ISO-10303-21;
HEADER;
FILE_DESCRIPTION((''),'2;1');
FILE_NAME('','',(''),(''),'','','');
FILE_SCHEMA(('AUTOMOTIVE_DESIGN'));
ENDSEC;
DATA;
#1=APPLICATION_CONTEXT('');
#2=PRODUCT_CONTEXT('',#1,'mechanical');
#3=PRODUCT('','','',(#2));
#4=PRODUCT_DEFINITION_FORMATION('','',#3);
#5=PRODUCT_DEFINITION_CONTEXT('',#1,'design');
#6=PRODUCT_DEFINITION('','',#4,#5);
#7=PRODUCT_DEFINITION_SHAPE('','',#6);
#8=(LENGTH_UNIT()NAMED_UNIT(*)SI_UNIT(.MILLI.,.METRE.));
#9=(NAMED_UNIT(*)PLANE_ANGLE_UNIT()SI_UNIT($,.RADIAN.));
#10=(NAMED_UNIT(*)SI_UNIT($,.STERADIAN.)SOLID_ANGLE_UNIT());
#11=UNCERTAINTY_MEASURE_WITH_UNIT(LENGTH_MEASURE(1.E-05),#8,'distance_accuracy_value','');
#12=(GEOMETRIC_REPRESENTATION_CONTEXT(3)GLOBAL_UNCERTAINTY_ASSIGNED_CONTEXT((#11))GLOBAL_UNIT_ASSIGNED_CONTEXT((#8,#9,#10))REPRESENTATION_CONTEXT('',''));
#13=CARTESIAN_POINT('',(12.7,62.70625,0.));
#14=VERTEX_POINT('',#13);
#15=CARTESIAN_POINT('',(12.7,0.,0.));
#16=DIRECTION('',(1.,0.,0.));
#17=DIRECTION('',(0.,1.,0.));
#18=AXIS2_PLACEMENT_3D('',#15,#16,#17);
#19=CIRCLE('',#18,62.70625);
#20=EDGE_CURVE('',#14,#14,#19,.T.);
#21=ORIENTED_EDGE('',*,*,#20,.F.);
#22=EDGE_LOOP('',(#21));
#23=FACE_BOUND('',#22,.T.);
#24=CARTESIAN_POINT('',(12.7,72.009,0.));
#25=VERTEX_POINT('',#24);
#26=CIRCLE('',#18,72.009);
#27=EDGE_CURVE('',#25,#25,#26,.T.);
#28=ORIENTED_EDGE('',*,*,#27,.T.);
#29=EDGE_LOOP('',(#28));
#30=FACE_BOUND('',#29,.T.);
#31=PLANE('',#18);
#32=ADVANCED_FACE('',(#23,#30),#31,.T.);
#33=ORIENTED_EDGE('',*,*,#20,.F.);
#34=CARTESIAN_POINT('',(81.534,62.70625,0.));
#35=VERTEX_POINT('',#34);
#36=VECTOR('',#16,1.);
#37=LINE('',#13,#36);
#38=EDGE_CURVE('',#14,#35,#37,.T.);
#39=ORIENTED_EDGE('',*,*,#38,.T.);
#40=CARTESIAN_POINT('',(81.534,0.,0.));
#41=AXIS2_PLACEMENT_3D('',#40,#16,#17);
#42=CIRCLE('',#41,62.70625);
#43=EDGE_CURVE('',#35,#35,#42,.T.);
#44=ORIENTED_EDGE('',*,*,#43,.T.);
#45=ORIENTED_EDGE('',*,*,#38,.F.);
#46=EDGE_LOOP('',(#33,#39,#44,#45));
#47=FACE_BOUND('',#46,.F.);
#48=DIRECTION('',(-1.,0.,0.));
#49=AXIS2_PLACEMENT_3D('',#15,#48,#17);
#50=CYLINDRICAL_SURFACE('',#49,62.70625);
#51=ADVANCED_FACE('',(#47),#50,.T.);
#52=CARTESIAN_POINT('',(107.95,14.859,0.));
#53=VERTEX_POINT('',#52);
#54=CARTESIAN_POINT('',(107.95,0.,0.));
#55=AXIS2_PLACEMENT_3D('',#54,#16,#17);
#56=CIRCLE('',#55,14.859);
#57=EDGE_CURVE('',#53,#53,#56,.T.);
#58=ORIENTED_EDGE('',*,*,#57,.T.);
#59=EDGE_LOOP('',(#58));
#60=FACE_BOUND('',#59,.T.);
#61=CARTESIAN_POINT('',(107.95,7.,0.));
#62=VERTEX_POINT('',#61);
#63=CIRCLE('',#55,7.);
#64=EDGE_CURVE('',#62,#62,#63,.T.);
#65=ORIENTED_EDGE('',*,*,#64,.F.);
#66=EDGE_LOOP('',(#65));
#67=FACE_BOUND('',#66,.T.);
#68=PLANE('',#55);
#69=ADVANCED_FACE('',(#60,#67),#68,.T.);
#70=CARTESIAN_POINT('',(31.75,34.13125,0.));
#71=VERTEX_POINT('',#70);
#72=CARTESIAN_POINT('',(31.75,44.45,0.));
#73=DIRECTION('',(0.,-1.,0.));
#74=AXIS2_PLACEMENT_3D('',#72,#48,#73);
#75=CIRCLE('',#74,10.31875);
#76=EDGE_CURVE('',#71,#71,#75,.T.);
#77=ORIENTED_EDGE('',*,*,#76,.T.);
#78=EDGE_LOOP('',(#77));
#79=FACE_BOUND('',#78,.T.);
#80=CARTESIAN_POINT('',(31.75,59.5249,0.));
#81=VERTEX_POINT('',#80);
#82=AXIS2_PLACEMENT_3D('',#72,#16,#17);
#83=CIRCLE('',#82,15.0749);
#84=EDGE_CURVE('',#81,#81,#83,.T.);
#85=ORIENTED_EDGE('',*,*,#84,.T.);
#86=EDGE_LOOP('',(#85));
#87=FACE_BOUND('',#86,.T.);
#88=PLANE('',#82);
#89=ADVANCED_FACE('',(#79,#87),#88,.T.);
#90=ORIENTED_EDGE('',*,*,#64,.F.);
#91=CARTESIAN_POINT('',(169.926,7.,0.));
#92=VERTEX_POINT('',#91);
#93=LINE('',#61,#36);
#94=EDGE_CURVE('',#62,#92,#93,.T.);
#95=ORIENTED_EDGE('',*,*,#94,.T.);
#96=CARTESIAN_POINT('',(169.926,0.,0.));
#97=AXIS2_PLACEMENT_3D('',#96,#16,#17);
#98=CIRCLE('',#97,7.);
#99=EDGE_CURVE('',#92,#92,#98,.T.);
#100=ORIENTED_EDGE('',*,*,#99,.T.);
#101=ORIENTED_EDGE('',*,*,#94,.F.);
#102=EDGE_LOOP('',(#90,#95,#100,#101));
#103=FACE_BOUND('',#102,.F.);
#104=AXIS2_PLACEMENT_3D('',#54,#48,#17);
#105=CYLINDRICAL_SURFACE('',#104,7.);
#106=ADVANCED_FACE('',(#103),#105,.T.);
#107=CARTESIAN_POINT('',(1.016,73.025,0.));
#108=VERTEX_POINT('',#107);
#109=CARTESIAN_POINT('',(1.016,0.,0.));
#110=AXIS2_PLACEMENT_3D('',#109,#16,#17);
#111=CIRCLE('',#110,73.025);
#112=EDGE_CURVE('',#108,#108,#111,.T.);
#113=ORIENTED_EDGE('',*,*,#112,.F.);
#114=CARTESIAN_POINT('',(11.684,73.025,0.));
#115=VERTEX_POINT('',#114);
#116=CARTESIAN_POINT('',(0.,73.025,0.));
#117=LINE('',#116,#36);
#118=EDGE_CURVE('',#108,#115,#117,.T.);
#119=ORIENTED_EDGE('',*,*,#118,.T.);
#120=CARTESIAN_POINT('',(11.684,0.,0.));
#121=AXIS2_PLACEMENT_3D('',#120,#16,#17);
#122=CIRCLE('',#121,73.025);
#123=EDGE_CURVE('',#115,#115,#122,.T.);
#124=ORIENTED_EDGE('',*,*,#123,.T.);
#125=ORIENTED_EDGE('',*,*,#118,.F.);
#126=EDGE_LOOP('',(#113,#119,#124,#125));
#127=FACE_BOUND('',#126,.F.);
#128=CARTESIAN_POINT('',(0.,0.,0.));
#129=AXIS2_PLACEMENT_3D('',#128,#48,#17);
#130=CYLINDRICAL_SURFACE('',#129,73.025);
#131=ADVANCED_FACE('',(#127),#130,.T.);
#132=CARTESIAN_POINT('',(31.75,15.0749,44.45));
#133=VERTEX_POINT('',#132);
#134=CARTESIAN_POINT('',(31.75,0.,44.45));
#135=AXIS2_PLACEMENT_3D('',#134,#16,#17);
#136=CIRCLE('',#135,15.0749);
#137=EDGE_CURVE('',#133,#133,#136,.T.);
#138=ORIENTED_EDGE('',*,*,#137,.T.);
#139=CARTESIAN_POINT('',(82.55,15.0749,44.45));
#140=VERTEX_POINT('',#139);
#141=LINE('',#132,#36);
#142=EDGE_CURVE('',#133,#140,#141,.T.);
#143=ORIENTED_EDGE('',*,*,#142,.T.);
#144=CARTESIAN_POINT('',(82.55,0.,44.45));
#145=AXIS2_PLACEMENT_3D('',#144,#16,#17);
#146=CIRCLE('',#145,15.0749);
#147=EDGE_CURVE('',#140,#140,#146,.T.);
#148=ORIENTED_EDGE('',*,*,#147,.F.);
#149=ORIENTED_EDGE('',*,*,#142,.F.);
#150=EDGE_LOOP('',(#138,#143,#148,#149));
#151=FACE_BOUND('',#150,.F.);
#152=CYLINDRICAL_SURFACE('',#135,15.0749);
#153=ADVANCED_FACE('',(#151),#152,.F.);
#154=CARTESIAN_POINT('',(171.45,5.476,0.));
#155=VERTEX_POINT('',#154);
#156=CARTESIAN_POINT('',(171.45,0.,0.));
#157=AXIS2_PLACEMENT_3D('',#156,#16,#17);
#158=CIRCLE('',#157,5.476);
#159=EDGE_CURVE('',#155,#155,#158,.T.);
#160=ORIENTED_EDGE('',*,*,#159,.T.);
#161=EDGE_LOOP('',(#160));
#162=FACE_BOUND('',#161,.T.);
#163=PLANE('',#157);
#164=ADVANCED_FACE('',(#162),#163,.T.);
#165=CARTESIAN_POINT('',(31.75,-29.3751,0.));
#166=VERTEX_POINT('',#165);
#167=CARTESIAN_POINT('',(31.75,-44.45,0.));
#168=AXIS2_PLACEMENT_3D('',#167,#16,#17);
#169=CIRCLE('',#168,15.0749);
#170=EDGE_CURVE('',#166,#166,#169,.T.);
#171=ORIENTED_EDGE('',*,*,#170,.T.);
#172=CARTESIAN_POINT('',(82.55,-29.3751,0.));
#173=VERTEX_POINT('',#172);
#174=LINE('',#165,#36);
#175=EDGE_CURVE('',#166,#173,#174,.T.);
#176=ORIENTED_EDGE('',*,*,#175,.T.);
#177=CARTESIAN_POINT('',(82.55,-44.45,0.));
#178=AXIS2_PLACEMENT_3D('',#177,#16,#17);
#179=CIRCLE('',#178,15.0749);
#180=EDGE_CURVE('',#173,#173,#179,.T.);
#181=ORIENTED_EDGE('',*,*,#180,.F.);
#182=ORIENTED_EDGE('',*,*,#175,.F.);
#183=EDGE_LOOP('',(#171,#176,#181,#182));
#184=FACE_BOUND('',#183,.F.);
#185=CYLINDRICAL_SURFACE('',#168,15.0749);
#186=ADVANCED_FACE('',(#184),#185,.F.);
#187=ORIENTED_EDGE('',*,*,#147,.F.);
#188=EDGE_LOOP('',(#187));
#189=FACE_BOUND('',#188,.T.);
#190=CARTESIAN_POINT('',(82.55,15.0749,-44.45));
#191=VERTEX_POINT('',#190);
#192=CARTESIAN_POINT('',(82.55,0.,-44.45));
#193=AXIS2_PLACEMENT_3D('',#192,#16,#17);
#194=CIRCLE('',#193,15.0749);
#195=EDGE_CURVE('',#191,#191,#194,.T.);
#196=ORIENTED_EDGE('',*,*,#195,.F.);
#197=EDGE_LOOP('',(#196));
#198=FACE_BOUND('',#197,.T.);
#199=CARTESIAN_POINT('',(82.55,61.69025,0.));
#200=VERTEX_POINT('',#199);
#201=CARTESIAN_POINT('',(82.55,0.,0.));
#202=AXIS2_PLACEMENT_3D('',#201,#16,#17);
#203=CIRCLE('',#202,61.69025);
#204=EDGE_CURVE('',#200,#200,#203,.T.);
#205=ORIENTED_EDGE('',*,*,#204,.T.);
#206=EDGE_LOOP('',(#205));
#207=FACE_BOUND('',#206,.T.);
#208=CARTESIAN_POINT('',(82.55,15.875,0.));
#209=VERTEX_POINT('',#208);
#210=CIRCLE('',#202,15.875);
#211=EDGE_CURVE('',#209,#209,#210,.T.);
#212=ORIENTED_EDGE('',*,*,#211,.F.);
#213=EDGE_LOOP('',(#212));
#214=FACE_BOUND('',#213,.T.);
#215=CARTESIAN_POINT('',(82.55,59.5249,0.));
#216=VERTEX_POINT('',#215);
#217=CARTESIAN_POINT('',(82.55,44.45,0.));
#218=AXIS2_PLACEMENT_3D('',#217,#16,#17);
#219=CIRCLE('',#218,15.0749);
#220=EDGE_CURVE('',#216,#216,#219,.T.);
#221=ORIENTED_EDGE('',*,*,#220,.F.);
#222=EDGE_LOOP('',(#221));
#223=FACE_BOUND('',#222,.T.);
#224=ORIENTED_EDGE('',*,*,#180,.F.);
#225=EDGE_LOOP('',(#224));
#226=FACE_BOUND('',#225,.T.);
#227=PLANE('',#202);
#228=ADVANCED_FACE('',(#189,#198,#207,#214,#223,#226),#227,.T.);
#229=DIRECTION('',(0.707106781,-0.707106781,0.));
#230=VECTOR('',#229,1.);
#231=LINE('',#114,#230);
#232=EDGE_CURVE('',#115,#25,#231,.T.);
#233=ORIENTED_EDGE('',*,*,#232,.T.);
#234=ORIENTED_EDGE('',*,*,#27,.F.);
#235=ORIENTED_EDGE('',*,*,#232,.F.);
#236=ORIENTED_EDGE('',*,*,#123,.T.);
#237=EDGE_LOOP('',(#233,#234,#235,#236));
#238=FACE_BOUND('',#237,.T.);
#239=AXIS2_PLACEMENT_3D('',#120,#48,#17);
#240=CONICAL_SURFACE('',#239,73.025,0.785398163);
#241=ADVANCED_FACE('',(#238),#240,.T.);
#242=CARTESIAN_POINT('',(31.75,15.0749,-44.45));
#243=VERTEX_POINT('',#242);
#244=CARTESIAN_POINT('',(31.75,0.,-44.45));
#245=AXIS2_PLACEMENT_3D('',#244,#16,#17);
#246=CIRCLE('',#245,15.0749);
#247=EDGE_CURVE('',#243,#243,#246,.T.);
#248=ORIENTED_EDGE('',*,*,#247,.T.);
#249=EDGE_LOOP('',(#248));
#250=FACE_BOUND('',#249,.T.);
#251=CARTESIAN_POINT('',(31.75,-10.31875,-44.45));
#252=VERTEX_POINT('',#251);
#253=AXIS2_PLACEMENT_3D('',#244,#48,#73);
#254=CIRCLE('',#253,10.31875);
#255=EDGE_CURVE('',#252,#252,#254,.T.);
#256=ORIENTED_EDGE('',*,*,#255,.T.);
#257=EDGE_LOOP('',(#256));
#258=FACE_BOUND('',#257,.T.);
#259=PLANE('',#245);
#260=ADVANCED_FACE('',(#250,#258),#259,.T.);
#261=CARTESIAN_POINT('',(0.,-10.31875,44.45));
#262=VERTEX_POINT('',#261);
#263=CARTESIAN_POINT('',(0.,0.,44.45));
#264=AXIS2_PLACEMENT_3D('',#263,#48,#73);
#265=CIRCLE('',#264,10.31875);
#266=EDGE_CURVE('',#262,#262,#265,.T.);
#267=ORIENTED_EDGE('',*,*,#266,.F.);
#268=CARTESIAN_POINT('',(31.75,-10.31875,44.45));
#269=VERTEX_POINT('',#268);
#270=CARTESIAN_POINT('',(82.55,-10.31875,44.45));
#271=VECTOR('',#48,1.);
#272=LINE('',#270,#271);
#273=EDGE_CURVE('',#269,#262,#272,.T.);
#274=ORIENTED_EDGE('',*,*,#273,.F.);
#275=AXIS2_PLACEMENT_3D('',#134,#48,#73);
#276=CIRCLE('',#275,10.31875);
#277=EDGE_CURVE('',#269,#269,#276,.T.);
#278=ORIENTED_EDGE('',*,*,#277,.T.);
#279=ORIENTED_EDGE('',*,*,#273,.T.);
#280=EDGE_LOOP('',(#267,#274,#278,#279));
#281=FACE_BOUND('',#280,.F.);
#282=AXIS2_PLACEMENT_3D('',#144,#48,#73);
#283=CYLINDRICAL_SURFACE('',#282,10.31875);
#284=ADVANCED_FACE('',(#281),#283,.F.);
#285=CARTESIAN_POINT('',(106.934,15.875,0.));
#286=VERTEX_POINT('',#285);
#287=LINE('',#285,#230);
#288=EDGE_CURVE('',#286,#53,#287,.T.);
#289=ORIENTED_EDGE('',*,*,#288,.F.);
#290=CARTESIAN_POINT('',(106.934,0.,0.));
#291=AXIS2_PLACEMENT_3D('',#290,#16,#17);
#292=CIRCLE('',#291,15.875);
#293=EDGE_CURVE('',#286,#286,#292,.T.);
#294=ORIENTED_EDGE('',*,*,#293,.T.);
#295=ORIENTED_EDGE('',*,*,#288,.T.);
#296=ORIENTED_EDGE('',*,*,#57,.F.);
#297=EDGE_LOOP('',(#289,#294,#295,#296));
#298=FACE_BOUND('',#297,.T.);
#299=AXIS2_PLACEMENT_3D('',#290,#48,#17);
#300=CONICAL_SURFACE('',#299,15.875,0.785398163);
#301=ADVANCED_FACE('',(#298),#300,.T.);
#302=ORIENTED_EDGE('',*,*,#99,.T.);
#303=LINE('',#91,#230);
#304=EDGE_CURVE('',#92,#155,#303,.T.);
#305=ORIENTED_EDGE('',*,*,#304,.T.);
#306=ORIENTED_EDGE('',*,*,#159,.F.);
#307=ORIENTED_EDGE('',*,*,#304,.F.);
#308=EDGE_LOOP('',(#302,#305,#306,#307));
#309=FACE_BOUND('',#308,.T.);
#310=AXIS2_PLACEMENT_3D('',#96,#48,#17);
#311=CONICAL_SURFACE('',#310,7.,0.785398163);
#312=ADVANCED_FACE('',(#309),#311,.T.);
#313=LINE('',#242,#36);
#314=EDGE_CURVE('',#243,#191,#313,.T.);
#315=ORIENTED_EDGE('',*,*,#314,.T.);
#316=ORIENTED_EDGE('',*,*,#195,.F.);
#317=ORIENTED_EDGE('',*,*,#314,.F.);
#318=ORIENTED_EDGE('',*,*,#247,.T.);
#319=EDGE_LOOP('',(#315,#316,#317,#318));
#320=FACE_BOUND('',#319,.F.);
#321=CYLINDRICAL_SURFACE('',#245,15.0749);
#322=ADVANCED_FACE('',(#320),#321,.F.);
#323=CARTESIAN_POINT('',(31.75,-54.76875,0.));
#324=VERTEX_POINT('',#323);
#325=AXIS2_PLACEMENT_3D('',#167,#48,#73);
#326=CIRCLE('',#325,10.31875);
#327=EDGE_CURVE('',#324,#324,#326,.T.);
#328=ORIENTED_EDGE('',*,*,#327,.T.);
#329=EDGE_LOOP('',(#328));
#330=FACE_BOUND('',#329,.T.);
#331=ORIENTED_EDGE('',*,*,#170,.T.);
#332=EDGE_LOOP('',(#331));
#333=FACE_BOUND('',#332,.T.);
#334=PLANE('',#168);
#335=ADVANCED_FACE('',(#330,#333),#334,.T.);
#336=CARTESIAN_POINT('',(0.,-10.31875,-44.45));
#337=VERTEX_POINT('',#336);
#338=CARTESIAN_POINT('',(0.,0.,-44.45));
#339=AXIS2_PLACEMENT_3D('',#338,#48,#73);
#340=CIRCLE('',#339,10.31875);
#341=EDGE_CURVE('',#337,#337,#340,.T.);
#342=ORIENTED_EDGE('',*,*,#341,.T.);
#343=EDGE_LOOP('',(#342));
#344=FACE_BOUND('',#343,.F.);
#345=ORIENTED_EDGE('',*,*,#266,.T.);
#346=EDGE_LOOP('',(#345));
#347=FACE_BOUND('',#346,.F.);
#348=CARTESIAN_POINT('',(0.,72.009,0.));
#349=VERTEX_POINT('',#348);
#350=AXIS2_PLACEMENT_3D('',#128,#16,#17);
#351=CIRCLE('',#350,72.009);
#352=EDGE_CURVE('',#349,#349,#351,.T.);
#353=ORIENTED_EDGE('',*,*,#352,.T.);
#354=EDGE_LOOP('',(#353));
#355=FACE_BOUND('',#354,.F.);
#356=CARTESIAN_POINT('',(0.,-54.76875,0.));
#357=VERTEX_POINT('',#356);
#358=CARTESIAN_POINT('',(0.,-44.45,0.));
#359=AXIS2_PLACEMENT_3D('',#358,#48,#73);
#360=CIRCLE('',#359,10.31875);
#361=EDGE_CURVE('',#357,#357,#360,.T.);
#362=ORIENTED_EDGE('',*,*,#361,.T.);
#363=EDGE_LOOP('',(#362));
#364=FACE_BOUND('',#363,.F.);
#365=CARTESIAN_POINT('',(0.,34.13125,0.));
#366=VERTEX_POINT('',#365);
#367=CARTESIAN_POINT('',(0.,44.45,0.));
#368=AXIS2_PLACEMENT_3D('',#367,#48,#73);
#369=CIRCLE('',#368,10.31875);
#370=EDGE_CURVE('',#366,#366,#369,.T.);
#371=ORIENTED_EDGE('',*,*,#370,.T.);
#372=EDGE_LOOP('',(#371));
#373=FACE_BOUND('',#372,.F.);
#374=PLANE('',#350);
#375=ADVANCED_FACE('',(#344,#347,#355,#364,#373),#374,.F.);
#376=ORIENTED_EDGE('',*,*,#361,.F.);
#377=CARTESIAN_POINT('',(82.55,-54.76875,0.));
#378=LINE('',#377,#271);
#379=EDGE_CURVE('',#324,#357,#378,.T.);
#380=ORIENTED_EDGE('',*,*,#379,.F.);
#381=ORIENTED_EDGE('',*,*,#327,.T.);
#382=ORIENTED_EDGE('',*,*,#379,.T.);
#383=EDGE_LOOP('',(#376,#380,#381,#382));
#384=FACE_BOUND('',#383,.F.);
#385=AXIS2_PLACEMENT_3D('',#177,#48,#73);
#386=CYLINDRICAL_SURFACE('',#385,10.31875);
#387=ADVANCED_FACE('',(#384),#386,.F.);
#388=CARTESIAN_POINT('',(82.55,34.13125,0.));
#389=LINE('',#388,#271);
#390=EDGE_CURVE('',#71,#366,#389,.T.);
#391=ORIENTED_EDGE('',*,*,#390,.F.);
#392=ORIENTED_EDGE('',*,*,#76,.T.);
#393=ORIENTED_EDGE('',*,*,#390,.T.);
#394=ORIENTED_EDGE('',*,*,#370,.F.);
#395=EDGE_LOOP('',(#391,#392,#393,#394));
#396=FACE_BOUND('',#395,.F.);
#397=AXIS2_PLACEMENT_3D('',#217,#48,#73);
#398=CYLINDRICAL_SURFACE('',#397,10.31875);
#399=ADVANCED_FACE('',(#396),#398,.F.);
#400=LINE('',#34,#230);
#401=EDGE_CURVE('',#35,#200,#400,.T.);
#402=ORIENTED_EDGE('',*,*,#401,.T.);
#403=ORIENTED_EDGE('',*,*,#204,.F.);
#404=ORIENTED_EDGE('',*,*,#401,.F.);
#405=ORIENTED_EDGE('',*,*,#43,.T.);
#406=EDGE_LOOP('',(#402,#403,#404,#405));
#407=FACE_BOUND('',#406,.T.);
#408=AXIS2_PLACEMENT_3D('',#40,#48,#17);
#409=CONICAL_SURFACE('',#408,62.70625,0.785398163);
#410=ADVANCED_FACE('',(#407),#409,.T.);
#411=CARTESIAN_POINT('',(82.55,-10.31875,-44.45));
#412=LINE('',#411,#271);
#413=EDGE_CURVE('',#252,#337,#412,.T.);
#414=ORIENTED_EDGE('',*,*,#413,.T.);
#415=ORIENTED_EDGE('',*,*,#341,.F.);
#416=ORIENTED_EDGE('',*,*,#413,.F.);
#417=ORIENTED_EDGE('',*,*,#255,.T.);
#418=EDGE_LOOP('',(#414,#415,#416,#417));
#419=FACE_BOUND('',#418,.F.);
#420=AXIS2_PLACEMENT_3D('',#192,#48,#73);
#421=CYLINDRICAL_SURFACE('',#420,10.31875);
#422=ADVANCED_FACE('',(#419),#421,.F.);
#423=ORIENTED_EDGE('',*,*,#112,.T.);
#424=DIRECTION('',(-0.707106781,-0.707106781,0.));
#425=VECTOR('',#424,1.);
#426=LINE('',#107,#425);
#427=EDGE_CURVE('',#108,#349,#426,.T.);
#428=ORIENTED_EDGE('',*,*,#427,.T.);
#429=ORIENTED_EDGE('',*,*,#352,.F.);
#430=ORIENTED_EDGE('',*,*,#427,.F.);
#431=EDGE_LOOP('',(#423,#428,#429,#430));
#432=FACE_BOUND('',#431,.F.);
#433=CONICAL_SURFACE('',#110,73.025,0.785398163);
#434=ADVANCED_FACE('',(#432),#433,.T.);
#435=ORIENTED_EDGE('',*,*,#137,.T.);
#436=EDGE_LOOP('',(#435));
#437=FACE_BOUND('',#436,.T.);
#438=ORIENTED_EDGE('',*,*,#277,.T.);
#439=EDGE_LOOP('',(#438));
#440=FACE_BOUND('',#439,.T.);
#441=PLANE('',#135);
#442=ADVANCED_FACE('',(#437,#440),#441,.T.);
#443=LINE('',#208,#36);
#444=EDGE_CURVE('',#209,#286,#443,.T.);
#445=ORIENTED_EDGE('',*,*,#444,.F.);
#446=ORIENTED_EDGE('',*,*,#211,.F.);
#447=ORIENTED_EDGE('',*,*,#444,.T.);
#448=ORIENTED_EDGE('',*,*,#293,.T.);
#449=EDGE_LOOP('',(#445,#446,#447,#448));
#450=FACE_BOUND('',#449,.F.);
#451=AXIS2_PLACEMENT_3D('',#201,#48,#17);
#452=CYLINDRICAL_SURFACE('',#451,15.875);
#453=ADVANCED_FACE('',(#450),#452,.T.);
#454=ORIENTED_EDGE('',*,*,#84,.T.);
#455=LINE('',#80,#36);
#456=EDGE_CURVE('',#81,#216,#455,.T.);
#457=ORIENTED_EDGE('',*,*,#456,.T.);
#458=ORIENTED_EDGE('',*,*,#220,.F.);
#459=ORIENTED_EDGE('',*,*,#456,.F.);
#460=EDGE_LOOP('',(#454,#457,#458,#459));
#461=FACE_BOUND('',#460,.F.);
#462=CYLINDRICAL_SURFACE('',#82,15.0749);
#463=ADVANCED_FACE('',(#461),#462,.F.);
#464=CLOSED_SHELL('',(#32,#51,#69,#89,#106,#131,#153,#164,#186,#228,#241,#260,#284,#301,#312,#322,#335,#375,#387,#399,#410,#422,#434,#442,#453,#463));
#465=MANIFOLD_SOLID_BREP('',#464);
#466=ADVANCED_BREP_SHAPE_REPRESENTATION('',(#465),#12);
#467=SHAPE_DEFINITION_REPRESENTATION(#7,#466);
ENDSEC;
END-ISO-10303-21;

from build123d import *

# Parameters (mm, degrees)
F0_R            = 73.025
F1_DEPTH        = 12.7
F2_R            = 62.70625
F3_DEPTH        = 69.85
F4_R            = 15.875
F5_DEPTH        = 25.4
F6_R            = 7
F7_DEPTH        = 63.5
F8_SIZE         = 1.016
F9_SIZE         = 1.524
F11_D           = 20.6375
F11_CBORE_D     = 30.1498
F11_CBORE_DEPTH = 50.8


# Not quite as in the source:
# - a length typed as a fraction of an inch, garbled in the dataset ("3 / 203.2 mm" for 3/8 in), is restored


with BuildPart() as f1:
    # F0 (on Right) → F1 (new body)
    with BuildSketch(Plane.YZ):
        Circle(F0_R)
    extrude(amount=F1_DEPTH)

    # F2 (on face) → F3 (join)
    with BuildSketch(Plane.YZ.offset(12.7)):
        Circle(F2_R)
    extrude(amount=F3_DEPTH)

    # F4 (on face) → F5 (join)
    with BuildSketch(Plane.YZ.offset(82.55)):
        Circle(F4_R)
    extrude(amount=F5_DEPTH)

    # F6 (on face) → F7 (join)
    with BuildSketch(Plane.YZ.offset(107.95)):
        Circle(F6_R)
    extrude(amount=F7_DEPTH)

    # F8
    f8_edges = [f1.edges().sort_by_distance(p)[0] for p in [
        (6.35, 73.025, 0),
        (0, -73.025, 0),
        (12.7, -73.025, 0),
        (82.55, -62.70625, 0),
        (107.95, -15.875, 0),
    ]]
    chamfer(f8_edges, length=F8_SIZE)

    # F9
    f9_edges = [f1.edges().sort_by_distance(p)[0] for p in [
        (171.45, -7, 0),
    ]]
    chamfer(f9_edges, length=F9_SIZE)

    # F11 (through all)
    with Locations(Plane.YZ.offset(82.55)):
        with Locations((0, 44.45), (44.45, 0), (0, -44.45), (-44.45, 0)):
            CounterBoreHole(F11_D / 2, F11_CBORE_D / 2, F11_CBORE_DEPTH)


solid = f1.part
